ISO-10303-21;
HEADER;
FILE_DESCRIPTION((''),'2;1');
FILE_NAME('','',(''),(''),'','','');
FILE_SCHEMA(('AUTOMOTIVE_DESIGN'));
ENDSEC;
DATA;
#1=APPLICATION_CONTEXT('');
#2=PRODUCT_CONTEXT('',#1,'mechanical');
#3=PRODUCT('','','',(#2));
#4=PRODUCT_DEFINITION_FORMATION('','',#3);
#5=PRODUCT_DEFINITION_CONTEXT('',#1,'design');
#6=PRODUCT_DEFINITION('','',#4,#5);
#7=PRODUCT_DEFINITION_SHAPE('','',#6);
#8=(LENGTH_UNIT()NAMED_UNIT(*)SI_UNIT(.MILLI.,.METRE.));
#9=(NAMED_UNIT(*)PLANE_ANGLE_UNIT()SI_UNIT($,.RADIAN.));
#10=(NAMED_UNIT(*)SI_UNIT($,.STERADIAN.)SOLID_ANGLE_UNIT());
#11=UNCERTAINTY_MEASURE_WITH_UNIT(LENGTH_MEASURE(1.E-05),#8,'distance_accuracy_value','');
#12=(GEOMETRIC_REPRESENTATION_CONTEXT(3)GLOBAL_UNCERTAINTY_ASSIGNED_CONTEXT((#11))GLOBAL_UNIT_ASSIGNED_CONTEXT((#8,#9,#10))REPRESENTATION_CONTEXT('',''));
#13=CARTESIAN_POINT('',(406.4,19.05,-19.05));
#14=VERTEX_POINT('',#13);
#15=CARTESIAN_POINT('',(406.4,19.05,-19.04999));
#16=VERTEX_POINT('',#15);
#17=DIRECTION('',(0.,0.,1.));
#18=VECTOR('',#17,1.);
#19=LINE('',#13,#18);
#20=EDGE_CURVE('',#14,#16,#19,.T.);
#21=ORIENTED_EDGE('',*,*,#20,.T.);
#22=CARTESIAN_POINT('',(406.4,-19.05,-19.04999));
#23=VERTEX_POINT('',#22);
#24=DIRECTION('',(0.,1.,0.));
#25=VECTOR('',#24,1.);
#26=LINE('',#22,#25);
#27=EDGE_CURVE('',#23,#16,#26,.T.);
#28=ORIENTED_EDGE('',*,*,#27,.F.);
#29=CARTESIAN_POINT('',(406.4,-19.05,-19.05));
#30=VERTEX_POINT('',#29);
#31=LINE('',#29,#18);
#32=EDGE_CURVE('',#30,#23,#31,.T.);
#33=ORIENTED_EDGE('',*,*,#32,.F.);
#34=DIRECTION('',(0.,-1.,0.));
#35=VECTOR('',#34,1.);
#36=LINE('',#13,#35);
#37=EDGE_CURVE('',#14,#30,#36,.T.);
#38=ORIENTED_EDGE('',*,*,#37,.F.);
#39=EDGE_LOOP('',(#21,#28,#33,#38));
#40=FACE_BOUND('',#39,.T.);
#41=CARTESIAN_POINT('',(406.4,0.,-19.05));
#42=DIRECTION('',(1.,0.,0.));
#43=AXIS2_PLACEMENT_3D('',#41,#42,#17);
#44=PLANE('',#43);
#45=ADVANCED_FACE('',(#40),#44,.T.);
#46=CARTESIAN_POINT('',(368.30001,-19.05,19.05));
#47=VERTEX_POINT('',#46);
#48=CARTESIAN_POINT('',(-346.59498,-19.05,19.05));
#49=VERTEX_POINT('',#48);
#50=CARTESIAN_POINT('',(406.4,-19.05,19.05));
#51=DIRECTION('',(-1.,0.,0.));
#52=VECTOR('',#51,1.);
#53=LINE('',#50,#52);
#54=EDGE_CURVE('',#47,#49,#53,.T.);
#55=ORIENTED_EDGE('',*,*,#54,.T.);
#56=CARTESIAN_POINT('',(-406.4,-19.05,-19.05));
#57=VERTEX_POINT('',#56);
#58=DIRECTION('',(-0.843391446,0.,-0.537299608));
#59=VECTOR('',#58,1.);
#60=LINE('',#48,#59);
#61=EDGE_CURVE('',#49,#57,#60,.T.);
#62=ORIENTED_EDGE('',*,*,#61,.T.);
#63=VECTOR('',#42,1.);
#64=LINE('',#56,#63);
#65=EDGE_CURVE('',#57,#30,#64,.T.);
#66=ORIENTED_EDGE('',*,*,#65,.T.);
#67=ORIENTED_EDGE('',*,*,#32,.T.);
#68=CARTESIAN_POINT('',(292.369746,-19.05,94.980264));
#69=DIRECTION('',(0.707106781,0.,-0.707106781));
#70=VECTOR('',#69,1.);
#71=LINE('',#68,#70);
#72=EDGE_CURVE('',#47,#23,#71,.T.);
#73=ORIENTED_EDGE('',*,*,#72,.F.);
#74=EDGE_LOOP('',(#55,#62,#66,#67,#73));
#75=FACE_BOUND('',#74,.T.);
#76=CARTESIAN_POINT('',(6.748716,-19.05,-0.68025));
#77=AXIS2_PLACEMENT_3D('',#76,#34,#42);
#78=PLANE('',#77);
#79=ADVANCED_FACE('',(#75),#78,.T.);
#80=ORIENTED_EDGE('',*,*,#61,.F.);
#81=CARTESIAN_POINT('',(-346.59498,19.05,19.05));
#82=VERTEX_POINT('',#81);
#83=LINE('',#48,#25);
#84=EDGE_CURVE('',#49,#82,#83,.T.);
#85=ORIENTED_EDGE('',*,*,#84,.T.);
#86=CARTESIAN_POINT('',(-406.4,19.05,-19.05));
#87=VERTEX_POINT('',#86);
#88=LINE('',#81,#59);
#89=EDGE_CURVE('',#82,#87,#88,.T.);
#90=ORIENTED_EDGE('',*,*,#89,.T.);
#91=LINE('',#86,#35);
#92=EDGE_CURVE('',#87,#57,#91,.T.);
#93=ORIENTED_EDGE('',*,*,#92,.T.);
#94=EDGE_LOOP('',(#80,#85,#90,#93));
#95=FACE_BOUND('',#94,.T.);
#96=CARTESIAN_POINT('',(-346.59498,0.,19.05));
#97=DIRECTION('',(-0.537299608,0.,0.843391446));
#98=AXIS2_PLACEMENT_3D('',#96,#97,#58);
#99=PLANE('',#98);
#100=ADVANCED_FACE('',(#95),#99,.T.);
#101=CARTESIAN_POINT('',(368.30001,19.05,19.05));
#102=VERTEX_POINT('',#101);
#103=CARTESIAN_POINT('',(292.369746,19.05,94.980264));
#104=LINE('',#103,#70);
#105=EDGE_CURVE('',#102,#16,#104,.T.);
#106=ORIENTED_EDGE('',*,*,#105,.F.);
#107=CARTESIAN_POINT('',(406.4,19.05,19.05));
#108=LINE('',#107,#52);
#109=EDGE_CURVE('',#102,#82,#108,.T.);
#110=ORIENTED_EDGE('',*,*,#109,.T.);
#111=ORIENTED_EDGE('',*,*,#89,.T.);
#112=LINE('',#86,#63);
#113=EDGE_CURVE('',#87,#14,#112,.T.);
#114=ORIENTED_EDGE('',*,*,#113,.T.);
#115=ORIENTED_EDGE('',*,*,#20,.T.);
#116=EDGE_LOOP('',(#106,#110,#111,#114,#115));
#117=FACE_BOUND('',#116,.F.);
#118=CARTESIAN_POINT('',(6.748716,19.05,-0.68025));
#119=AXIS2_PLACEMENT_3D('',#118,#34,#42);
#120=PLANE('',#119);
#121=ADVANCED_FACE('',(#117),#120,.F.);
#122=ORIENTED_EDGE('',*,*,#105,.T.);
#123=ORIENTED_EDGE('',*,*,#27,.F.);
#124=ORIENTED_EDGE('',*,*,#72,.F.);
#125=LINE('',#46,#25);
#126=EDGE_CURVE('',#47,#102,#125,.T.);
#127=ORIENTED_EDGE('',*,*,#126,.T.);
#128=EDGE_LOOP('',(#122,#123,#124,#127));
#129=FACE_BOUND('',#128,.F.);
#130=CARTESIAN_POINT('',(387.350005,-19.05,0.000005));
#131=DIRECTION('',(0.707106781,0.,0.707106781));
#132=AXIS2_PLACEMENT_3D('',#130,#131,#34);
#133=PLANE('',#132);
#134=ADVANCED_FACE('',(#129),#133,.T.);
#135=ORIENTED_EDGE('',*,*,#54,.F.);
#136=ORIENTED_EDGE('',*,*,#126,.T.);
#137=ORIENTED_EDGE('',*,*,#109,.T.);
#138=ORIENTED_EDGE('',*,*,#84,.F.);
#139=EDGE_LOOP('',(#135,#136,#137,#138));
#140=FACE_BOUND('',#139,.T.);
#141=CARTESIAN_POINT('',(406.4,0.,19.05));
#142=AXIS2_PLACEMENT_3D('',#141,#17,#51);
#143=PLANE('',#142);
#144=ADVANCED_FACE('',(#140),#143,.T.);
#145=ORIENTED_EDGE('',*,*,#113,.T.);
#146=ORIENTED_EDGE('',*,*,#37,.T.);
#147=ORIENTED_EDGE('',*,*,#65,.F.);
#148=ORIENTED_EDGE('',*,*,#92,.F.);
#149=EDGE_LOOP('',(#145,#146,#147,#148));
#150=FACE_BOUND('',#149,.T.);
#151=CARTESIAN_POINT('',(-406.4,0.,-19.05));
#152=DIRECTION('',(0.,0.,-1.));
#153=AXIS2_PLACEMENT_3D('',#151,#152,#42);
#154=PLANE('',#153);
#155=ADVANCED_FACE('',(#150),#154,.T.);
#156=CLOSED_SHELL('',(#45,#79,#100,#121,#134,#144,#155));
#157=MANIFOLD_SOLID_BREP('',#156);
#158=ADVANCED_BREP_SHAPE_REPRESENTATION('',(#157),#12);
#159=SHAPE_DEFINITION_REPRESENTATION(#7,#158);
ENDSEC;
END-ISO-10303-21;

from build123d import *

# Parameters (mm, degrees)
F1_DEPTH = 19.05
F2_SIZE  = 38.09999


# Not quite as in the source:
# - a fillet or chamfer is up to 0.001 mm smaller than in the source, because OpenCascade refuses the exact size


with BuildPart() as f1:
    # F0 (on Front) → F1 (new body, symmetric)
    with BuildSketch(Plane.XZ):
        Polygon((-346.5949795118, 19.05), (-406.4, -19.05), (406.4, -19.05), (406.4, 19.05), align=None)
    extrude(amount=F1_DEPTH, both=True)

    # F2 (size 38.1 in the source; OpenCascade refuses exactly that, so slightly less here)
    f2_edges = [f1.edges().sort_by_distance(p)[0] for p in [
        (406.4, 0, 19.05),
    ]]
    chamfer(f2_edges, length=F2_SIZE)


solid = f1.part
